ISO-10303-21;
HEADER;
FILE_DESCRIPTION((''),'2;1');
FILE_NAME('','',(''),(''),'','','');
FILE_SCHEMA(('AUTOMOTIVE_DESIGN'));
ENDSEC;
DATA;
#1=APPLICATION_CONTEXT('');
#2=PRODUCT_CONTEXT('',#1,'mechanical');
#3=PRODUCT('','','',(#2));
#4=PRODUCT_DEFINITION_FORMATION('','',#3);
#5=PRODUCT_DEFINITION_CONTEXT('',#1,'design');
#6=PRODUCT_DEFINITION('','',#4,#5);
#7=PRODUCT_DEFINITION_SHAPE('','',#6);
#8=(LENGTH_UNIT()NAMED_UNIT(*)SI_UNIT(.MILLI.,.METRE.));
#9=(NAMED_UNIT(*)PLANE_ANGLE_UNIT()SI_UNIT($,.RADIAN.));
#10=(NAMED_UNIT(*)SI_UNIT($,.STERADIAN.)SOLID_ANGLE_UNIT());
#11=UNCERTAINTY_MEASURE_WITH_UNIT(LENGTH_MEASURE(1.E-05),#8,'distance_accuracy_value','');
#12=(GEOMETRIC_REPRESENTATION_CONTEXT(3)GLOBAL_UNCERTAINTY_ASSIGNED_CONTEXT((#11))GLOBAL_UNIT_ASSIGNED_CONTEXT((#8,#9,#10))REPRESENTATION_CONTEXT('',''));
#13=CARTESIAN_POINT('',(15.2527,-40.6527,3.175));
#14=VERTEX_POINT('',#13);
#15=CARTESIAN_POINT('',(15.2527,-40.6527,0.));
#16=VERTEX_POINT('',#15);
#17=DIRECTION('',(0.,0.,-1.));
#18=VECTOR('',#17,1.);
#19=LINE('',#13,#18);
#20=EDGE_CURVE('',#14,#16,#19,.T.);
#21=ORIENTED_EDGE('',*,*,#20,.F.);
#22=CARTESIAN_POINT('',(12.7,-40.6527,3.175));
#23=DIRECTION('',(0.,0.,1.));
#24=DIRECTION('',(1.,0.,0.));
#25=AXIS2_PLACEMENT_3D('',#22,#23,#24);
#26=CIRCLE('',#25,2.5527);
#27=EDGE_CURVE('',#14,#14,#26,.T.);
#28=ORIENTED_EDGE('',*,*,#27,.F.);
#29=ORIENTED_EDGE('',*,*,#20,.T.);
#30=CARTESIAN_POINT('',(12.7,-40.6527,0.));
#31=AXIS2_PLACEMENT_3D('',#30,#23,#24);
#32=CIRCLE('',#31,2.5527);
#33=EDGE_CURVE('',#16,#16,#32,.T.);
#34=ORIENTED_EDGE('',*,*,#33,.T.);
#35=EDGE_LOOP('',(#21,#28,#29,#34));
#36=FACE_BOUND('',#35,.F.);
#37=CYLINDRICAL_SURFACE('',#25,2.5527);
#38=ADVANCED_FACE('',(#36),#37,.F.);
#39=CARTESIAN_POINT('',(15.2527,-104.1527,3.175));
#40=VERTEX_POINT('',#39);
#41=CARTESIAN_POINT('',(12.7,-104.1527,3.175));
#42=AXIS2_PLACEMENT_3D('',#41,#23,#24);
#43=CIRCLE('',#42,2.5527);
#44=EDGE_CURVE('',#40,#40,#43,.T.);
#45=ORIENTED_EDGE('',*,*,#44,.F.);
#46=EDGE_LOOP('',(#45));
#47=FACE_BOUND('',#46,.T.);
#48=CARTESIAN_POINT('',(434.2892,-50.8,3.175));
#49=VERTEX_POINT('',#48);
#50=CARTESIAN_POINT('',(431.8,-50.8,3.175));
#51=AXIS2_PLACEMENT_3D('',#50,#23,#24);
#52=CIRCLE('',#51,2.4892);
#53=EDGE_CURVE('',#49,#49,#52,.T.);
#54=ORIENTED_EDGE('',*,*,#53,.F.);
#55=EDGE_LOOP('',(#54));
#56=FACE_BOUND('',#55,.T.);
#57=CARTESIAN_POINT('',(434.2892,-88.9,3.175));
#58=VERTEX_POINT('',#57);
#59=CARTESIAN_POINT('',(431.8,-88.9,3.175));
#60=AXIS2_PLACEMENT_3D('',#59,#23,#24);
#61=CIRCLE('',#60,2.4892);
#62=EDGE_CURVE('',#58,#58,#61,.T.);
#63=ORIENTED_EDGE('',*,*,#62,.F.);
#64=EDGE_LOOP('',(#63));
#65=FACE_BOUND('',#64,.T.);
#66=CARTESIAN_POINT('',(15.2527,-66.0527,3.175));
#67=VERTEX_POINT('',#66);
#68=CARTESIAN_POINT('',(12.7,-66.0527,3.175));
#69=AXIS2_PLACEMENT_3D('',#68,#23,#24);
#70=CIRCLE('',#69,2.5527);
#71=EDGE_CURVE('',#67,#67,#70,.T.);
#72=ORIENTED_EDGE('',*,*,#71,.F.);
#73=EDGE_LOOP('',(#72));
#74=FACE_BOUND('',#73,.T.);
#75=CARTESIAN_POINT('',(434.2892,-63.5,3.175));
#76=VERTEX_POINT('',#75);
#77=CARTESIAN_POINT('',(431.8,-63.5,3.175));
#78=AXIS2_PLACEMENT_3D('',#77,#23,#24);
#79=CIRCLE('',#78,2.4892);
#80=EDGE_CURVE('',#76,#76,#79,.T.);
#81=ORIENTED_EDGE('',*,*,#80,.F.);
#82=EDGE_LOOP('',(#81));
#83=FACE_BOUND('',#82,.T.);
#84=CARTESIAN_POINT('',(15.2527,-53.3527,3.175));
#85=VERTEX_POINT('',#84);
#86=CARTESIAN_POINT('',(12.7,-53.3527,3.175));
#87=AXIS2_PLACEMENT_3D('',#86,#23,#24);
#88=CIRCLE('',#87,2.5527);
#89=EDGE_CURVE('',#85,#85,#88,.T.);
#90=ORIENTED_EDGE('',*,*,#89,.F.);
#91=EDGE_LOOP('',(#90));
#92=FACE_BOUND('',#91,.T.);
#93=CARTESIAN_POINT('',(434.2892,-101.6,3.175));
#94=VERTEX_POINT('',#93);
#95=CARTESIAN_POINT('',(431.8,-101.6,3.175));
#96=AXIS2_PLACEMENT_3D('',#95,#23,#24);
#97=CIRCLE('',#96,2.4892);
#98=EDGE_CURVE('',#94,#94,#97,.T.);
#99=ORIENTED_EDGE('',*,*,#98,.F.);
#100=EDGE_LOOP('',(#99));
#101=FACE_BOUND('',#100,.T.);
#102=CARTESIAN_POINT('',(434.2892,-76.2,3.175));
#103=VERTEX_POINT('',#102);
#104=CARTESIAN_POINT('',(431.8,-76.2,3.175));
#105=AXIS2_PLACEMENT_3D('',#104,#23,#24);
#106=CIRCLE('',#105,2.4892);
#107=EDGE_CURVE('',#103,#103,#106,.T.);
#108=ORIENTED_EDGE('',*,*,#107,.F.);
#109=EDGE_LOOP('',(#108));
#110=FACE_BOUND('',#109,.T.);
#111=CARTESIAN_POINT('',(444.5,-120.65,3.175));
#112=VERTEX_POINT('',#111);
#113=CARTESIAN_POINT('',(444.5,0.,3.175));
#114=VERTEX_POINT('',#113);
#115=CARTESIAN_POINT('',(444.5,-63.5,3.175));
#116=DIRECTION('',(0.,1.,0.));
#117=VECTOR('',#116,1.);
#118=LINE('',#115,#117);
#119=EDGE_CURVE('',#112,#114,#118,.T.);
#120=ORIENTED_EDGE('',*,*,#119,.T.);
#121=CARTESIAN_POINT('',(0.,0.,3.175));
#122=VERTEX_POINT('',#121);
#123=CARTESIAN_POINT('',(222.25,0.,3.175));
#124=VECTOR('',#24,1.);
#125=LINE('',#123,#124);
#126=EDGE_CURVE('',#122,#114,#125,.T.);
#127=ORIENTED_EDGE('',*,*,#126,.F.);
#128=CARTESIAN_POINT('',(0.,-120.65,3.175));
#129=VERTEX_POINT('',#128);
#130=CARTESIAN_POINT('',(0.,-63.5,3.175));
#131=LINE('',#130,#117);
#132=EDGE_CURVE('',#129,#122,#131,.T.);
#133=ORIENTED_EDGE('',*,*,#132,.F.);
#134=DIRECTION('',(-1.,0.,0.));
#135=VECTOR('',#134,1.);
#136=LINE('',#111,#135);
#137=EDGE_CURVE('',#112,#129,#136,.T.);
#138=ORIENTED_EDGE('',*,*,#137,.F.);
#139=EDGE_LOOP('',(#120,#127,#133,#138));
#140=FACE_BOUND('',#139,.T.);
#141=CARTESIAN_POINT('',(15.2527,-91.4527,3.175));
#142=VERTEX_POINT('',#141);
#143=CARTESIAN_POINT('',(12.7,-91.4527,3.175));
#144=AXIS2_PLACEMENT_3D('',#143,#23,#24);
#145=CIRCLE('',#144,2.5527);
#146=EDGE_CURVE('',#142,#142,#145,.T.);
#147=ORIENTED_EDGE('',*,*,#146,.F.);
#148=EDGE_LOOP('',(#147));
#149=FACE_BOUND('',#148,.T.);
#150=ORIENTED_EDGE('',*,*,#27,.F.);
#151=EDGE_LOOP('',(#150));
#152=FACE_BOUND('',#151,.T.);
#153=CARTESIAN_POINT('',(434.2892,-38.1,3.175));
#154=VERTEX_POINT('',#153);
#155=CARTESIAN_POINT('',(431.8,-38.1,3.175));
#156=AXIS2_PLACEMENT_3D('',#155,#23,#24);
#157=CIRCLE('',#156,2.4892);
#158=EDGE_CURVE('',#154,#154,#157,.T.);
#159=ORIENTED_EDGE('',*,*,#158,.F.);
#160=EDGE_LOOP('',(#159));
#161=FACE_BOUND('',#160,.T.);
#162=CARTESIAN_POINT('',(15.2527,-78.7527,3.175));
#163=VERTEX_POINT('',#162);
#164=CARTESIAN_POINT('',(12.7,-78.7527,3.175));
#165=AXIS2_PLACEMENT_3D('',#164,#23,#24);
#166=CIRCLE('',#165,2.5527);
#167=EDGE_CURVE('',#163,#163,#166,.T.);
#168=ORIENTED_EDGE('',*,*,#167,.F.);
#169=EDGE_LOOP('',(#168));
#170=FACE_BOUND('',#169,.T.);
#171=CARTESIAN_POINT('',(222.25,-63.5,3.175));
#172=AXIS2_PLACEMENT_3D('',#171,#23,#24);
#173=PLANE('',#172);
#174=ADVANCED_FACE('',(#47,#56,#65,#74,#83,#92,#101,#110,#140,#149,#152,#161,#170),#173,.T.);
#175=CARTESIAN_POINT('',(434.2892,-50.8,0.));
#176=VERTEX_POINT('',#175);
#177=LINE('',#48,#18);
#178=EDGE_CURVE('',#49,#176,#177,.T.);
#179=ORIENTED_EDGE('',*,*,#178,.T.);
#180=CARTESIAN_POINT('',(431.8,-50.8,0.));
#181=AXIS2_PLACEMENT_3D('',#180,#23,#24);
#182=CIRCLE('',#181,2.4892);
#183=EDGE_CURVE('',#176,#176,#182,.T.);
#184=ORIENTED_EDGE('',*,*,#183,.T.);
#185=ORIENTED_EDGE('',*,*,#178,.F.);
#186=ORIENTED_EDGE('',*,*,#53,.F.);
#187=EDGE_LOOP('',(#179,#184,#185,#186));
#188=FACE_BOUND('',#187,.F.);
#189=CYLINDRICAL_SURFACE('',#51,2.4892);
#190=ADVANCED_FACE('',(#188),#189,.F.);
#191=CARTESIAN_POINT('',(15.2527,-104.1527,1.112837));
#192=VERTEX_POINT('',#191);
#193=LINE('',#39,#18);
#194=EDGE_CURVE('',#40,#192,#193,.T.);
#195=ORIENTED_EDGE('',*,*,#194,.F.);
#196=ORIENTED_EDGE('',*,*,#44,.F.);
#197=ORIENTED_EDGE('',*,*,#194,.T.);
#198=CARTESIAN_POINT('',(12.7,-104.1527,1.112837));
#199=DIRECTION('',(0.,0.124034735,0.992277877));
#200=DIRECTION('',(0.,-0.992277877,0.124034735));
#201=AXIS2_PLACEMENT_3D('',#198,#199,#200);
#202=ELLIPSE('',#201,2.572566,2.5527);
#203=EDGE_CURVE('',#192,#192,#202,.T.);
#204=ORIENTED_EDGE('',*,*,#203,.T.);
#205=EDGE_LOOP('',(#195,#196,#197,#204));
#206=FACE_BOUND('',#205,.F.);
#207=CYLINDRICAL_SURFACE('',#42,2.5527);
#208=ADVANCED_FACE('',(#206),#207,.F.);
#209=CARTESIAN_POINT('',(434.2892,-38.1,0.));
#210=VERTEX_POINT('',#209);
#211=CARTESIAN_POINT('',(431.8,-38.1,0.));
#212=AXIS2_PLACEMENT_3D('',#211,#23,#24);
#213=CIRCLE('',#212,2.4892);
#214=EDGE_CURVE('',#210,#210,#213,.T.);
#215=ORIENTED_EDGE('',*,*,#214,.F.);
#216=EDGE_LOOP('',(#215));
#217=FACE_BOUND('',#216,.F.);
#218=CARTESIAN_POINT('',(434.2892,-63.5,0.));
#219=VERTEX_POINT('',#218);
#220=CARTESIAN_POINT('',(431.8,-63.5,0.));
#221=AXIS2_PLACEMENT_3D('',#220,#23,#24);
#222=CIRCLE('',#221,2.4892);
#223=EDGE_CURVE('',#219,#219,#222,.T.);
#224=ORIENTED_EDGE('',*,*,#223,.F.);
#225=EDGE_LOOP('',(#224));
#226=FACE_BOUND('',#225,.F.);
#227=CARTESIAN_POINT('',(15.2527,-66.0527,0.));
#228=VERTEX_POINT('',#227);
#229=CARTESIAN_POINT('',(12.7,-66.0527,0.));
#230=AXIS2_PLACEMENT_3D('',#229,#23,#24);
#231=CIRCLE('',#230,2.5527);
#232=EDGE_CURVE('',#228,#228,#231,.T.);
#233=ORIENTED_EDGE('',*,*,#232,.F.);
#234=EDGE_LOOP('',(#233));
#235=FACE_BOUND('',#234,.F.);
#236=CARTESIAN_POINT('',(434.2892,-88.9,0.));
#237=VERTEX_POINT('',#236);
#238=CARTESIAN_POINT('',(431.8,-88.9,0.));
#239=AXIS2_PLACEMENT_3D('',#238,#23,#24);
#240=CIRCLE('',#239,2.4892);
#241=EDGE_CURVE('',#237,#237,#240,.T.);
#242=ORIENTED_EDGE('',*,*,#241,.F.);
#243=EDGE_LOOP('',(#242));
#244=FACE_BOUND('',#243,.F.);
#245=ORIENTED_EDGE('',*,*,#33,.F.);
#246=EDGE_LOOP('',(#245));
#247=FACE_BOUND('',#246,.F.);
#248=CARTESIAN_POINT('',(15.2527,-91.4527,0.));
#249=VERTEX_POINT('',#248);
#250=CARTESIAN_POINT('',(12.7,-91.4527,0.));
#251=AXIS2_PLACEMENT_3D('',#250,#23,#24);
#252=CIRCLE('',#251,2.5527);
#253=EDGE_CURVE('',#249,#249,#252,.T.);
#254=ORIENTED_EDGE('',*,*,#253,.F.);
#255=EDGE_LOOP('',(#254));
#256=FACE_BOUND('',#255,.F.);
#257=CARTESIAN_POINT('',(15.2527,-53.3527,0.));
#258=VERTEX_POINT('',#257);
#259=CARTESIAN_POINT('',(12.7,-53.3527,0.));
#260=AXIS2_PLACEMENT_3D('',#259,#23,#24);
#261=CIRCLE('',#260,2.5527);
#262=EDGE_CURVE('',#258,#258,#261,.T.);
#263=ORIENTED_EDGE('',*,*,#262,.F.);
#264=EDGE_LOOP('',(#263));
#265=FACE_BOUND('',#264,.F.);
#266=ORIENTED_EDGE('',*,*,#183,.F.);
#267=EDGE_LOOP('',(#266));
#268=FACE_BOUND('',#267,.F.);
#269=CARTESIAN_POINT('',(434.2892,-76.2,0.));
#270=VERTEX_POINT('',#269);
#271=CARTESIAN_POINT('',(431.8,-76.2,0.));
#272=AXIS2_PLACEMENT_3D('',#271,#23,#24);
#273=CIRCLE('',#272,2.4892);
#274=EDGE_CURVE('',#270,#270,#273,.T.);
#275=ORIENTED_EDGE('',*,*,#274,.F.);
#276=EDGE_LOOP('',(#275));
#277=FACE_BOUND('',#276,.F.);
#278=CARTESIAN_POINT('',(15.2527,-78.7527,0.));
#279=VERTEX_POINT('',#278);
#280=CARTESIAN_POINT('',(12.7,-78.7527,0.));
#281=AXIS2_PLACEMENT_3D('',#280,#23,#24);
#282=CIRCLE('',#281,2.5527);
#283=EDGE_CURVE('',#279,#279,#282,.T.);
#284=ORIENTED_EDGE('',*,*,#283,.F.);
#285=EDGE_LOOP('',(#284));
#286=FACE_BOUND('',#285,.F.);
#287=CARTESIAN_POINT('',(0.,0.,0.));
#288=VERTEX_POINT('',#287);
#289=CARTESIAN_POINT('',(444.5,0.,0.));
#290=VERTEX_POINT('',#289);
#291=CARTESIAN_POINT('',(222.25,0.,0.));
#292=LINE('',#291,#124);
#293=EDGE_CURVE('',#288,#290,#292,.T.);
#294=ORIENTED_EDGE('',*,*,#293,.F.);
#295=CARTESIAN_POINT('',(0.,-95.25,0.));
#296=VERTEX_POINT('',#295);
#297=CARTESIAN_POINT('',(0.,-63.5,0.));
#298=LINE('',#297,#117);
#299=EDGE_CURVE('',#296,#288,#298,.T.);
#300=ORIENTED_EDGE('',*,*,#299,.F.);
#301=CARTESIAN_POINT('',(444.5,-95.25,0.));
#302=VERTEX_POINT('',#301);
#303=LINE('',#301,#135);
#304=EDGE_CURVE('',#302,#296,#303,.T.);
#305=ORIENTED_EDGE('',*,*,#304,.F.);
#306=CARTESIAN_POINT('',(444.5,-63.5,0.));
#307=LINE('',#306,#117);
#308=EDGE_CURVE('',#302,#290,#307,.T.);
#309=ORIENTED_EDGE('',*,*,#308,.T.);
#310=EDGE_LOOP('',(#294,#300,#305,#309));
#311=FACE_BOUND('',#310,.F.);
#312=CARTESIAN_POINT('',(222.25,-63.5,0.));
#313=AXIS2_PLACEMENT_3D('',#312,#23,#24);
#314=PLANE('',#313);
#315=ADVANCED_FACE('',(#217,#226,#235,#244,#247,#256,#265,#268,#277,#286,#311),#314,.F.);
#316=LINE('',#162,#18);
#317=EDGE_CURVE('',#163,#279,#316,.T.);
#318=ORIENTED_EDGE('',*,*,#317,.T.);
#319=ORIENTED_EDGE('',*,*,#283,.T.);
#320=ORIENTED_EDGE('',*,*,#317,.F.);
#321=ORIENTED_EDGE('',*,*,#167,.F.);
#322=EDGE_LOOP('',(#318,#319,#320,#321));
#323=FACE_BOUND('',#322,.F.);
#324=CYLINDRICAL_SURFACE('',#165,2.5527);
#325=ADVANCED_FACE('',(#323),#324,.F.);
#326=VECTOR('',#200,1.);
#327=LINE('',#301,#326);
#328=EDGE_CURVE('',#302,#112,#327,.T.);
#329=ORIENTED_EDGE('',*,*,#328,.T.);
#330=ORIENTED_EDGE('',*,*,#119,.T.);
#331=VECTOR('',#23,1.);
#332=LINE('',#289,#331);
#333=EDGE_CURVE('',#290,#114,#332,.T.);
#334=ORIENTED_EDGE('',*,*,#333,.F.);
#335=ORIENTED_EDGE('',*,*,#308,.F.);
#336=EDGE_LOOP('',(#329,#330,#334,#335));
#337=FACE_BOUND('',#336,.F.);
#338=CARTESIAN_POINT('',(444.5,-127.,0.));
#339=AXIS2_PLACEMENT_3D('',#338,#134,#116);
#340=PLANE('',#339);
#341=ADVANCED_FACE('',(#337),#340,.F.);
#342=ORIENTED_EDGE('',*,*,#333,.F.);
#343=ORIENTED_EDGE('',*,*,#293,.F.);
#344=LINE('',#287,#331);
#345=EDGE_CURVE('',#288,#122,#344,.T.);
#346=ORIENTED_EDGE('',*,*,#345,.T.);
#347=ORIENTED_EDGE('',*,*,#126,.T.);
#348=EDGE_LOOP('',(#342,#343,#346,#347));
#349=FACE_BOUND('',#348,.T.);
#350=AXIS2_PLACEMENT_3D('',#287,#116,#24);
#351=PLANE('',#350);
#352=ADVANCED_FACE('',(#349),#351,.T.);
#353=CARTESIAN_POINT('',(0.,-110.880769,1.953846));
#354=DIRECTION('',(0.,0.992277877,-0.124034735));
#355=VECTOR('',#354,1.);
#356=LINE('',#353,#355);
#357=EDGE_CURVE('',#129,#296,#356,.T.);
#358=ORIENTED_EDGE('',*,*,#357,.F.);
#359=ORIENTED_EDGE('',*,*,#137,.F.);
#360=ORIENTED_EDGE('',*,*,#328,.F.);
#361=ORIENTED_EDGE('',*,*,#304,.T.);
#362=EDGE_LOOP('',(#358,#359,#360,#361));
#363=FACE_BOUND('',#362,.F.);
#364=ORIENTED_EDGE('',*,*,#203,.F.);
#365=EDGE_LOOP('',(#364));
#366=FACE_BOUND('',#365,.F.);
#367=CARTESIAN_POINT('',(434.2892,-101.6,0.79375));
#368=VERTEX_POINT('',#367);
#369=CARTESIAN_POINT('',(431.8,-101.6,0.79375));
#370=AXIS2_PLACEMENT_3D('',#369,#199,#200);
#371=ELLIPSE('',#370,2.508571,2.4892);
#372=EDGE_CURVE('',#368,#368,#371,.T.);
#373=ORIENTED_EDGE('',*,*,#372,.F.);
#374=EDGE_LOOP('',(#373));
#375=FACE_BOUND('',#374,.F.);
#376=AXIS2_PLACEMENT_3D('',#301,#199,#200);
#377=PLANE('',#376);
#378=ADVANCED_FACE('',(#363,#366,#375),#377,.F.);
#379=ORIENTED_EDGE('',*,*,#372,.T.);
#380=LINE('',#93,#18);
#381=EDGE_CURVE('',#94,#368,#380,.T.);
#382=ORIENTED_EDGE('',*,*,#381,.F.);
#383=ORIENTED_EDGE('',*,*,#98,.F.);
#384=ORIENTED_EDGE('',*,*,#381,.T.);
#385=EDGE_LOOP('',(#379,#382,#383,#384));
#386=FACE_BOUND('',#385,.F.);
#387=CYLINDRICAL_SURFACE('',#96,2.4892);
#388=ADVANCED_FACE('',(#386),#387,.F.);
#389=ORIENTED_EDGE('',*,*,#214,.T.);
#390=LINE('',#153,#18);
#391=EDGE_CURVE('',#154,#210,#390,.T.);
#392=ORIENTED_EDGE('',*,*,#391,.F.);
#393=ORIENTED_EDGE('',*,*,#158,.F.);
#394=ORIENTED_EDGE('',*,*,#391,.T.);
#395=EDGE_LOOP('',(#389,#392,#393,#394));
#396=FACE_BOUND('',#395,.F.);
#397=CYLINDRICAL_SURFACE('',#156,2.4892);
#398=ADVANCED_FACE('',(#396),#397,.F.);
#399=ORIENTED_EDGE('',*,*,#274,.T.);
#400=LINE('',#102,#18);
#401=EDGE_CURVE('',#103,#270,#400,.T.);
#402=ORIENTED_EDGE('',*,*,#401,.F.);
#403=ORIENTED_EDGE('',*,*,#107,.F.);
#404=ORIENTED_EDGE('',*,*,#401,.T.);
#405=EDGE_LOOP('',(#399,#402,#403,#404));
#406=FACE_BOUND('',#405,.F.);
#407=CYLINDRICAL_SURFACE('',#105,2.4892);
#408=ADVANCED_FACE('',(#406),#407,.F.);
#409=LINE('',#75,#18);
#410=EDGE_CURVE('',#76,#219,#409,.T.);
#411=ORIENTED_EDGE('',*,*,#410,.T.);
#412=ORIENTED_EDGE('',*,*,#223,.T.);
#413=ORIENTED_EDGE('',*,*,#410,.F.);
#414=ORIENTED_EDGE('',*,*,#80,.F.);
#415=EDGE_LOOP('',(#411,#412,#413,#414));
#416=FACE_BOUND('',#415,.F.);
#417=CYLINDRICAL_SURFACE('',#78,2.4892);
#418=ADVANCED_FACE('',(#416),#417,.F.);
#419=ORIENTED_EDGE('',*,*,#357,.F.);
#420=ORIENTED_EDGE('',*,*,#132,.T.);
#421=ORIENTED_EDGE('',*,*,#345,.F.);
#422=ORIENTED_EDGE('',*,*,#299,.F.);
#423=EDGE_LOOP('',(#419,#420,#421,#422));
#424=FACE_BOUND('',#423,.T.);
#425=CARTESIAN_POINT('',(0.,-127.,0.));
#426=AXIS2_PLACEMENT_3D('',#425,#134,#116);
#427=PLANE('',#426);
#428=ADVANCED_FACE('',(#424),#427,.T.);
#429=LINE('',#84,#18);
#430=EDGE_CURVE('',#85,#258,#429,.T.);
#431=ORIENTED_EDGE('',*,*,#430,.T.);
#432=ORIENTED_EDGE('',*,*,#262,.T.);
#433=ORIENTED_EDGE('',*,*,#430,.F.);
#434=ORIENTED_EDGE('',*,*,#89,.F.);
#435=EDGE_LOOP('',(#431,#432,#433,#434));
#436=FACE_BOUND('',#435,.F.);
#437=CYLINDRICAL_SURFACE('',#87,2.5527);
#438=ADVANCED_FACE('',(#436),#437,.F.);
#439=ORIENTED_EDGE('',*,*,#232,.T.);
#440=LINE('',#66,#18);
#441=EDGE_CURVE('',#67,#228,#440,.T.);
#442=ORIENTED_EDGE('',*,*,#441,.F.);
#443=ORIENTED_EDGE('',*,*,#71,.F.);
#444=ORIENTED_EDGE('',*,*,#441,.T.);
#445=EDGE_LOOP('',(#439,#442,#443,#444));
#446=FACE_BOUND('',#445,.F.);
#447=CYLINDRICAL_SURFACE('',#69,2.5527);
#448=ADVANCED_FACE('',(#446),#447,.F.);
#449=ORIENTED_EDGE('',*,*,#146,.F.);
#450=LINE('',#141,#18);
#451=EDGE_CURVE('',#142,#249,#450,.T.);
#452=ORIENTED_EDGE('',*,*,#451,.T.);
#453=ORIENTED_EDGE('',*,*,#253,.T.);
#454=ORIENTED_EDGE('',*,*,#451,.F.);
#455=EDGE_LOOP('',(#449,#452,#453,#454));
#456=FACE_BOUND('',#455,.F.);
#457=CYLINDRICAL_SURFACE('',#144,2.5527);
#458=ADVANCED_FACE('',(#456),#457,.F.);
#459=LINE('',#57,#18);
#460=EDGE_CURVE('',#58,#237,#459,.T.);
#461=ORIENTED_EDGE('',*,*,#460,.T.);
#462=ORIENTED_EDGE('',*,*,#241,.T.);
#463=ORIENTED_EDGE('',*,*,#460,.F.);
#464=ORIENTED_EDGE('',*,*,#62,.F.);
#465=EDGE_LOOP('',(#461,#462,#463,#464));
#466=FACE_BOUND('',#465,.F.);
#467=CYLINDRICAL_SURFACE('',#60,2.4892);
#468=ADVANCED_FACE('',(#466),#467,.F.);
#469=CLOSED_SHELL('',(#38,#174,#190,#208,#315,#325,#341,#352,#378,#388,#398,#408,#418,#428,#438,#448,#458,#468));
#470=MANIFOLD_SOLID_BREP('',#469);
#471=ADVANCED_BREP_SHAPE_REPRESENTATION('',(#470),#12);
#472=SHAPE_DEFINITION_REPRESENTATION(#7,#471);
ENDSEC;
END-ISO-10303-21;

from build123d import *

# Parameters (mm, degrees)
F0_W     = 444.5
F0_H     = 127
F1_DEPTH = 3.175
F2_R     = 2.5527
F2_R_2   = 2.4892
F3_DEPTH = 25.4
F5_DEPTH = 444.501


# Not quite as in the source:
# - a feature names something its author has since deleted; it is built from what else it names


with BuildPart() as f1:
    # F0 (on Top) → F1 (new body)
    with BuildSketch(Plane.XY):
        with Locations((222.25, -63.5)):
            Rectangle(F0_W, F0_H)
    extrude(amount=F1_DEPTH)

    # F2 (on face) → F3 (cut)
    with BuildSketch(Plane.XY.offset(3.175)):
        with Locations((12.7, -104.1527)):
            Circle(F2_R)
        with Locations((12.7, -91.4527)):
            Circle(F2_R)
        with Locations((12.7, -78.7527)):
            Circle(F2_R)
        with Locations((12.7, -66.0527)):
            Circle(F2_R)
        with Locations((12.7, -53.3527)):
            Circle(F2_R)
        with Locations((431.8, -101.6)):
            Circle(F2_R_2)
        with Locations((431.8, -88.9)):
            Circle(F2_R_2)
        with Locations((431.8, -76.2)):
            Circle(F2_R_2)
        with Locations((431.8, -63.5)):
            Circle(F2_R_2)
        with Locations((431.8, -50.8)):
            Circle(F2_R_2)
        with Locations((12.7, -40.6527)):
            Circle(F2_R)
        with Locations((431.8, -38.1)):
            Circle(F2_R_2)
    extrude(amount=-F3_DEPTH, mode=Mode.SUBTRACT)

    # F4 (on face) → F5 (cut, through all)
    with BuildSketch(Plane.YZ.offset(444.5)):
        Polygon((-95.25, 0), (-120.65, 3.175), (-127, 3.175), (-127, 0), align=None)
    extrude(amount=-F5_DEPTH, mode=Mode.SUBTRACT)


solid = f1.part
